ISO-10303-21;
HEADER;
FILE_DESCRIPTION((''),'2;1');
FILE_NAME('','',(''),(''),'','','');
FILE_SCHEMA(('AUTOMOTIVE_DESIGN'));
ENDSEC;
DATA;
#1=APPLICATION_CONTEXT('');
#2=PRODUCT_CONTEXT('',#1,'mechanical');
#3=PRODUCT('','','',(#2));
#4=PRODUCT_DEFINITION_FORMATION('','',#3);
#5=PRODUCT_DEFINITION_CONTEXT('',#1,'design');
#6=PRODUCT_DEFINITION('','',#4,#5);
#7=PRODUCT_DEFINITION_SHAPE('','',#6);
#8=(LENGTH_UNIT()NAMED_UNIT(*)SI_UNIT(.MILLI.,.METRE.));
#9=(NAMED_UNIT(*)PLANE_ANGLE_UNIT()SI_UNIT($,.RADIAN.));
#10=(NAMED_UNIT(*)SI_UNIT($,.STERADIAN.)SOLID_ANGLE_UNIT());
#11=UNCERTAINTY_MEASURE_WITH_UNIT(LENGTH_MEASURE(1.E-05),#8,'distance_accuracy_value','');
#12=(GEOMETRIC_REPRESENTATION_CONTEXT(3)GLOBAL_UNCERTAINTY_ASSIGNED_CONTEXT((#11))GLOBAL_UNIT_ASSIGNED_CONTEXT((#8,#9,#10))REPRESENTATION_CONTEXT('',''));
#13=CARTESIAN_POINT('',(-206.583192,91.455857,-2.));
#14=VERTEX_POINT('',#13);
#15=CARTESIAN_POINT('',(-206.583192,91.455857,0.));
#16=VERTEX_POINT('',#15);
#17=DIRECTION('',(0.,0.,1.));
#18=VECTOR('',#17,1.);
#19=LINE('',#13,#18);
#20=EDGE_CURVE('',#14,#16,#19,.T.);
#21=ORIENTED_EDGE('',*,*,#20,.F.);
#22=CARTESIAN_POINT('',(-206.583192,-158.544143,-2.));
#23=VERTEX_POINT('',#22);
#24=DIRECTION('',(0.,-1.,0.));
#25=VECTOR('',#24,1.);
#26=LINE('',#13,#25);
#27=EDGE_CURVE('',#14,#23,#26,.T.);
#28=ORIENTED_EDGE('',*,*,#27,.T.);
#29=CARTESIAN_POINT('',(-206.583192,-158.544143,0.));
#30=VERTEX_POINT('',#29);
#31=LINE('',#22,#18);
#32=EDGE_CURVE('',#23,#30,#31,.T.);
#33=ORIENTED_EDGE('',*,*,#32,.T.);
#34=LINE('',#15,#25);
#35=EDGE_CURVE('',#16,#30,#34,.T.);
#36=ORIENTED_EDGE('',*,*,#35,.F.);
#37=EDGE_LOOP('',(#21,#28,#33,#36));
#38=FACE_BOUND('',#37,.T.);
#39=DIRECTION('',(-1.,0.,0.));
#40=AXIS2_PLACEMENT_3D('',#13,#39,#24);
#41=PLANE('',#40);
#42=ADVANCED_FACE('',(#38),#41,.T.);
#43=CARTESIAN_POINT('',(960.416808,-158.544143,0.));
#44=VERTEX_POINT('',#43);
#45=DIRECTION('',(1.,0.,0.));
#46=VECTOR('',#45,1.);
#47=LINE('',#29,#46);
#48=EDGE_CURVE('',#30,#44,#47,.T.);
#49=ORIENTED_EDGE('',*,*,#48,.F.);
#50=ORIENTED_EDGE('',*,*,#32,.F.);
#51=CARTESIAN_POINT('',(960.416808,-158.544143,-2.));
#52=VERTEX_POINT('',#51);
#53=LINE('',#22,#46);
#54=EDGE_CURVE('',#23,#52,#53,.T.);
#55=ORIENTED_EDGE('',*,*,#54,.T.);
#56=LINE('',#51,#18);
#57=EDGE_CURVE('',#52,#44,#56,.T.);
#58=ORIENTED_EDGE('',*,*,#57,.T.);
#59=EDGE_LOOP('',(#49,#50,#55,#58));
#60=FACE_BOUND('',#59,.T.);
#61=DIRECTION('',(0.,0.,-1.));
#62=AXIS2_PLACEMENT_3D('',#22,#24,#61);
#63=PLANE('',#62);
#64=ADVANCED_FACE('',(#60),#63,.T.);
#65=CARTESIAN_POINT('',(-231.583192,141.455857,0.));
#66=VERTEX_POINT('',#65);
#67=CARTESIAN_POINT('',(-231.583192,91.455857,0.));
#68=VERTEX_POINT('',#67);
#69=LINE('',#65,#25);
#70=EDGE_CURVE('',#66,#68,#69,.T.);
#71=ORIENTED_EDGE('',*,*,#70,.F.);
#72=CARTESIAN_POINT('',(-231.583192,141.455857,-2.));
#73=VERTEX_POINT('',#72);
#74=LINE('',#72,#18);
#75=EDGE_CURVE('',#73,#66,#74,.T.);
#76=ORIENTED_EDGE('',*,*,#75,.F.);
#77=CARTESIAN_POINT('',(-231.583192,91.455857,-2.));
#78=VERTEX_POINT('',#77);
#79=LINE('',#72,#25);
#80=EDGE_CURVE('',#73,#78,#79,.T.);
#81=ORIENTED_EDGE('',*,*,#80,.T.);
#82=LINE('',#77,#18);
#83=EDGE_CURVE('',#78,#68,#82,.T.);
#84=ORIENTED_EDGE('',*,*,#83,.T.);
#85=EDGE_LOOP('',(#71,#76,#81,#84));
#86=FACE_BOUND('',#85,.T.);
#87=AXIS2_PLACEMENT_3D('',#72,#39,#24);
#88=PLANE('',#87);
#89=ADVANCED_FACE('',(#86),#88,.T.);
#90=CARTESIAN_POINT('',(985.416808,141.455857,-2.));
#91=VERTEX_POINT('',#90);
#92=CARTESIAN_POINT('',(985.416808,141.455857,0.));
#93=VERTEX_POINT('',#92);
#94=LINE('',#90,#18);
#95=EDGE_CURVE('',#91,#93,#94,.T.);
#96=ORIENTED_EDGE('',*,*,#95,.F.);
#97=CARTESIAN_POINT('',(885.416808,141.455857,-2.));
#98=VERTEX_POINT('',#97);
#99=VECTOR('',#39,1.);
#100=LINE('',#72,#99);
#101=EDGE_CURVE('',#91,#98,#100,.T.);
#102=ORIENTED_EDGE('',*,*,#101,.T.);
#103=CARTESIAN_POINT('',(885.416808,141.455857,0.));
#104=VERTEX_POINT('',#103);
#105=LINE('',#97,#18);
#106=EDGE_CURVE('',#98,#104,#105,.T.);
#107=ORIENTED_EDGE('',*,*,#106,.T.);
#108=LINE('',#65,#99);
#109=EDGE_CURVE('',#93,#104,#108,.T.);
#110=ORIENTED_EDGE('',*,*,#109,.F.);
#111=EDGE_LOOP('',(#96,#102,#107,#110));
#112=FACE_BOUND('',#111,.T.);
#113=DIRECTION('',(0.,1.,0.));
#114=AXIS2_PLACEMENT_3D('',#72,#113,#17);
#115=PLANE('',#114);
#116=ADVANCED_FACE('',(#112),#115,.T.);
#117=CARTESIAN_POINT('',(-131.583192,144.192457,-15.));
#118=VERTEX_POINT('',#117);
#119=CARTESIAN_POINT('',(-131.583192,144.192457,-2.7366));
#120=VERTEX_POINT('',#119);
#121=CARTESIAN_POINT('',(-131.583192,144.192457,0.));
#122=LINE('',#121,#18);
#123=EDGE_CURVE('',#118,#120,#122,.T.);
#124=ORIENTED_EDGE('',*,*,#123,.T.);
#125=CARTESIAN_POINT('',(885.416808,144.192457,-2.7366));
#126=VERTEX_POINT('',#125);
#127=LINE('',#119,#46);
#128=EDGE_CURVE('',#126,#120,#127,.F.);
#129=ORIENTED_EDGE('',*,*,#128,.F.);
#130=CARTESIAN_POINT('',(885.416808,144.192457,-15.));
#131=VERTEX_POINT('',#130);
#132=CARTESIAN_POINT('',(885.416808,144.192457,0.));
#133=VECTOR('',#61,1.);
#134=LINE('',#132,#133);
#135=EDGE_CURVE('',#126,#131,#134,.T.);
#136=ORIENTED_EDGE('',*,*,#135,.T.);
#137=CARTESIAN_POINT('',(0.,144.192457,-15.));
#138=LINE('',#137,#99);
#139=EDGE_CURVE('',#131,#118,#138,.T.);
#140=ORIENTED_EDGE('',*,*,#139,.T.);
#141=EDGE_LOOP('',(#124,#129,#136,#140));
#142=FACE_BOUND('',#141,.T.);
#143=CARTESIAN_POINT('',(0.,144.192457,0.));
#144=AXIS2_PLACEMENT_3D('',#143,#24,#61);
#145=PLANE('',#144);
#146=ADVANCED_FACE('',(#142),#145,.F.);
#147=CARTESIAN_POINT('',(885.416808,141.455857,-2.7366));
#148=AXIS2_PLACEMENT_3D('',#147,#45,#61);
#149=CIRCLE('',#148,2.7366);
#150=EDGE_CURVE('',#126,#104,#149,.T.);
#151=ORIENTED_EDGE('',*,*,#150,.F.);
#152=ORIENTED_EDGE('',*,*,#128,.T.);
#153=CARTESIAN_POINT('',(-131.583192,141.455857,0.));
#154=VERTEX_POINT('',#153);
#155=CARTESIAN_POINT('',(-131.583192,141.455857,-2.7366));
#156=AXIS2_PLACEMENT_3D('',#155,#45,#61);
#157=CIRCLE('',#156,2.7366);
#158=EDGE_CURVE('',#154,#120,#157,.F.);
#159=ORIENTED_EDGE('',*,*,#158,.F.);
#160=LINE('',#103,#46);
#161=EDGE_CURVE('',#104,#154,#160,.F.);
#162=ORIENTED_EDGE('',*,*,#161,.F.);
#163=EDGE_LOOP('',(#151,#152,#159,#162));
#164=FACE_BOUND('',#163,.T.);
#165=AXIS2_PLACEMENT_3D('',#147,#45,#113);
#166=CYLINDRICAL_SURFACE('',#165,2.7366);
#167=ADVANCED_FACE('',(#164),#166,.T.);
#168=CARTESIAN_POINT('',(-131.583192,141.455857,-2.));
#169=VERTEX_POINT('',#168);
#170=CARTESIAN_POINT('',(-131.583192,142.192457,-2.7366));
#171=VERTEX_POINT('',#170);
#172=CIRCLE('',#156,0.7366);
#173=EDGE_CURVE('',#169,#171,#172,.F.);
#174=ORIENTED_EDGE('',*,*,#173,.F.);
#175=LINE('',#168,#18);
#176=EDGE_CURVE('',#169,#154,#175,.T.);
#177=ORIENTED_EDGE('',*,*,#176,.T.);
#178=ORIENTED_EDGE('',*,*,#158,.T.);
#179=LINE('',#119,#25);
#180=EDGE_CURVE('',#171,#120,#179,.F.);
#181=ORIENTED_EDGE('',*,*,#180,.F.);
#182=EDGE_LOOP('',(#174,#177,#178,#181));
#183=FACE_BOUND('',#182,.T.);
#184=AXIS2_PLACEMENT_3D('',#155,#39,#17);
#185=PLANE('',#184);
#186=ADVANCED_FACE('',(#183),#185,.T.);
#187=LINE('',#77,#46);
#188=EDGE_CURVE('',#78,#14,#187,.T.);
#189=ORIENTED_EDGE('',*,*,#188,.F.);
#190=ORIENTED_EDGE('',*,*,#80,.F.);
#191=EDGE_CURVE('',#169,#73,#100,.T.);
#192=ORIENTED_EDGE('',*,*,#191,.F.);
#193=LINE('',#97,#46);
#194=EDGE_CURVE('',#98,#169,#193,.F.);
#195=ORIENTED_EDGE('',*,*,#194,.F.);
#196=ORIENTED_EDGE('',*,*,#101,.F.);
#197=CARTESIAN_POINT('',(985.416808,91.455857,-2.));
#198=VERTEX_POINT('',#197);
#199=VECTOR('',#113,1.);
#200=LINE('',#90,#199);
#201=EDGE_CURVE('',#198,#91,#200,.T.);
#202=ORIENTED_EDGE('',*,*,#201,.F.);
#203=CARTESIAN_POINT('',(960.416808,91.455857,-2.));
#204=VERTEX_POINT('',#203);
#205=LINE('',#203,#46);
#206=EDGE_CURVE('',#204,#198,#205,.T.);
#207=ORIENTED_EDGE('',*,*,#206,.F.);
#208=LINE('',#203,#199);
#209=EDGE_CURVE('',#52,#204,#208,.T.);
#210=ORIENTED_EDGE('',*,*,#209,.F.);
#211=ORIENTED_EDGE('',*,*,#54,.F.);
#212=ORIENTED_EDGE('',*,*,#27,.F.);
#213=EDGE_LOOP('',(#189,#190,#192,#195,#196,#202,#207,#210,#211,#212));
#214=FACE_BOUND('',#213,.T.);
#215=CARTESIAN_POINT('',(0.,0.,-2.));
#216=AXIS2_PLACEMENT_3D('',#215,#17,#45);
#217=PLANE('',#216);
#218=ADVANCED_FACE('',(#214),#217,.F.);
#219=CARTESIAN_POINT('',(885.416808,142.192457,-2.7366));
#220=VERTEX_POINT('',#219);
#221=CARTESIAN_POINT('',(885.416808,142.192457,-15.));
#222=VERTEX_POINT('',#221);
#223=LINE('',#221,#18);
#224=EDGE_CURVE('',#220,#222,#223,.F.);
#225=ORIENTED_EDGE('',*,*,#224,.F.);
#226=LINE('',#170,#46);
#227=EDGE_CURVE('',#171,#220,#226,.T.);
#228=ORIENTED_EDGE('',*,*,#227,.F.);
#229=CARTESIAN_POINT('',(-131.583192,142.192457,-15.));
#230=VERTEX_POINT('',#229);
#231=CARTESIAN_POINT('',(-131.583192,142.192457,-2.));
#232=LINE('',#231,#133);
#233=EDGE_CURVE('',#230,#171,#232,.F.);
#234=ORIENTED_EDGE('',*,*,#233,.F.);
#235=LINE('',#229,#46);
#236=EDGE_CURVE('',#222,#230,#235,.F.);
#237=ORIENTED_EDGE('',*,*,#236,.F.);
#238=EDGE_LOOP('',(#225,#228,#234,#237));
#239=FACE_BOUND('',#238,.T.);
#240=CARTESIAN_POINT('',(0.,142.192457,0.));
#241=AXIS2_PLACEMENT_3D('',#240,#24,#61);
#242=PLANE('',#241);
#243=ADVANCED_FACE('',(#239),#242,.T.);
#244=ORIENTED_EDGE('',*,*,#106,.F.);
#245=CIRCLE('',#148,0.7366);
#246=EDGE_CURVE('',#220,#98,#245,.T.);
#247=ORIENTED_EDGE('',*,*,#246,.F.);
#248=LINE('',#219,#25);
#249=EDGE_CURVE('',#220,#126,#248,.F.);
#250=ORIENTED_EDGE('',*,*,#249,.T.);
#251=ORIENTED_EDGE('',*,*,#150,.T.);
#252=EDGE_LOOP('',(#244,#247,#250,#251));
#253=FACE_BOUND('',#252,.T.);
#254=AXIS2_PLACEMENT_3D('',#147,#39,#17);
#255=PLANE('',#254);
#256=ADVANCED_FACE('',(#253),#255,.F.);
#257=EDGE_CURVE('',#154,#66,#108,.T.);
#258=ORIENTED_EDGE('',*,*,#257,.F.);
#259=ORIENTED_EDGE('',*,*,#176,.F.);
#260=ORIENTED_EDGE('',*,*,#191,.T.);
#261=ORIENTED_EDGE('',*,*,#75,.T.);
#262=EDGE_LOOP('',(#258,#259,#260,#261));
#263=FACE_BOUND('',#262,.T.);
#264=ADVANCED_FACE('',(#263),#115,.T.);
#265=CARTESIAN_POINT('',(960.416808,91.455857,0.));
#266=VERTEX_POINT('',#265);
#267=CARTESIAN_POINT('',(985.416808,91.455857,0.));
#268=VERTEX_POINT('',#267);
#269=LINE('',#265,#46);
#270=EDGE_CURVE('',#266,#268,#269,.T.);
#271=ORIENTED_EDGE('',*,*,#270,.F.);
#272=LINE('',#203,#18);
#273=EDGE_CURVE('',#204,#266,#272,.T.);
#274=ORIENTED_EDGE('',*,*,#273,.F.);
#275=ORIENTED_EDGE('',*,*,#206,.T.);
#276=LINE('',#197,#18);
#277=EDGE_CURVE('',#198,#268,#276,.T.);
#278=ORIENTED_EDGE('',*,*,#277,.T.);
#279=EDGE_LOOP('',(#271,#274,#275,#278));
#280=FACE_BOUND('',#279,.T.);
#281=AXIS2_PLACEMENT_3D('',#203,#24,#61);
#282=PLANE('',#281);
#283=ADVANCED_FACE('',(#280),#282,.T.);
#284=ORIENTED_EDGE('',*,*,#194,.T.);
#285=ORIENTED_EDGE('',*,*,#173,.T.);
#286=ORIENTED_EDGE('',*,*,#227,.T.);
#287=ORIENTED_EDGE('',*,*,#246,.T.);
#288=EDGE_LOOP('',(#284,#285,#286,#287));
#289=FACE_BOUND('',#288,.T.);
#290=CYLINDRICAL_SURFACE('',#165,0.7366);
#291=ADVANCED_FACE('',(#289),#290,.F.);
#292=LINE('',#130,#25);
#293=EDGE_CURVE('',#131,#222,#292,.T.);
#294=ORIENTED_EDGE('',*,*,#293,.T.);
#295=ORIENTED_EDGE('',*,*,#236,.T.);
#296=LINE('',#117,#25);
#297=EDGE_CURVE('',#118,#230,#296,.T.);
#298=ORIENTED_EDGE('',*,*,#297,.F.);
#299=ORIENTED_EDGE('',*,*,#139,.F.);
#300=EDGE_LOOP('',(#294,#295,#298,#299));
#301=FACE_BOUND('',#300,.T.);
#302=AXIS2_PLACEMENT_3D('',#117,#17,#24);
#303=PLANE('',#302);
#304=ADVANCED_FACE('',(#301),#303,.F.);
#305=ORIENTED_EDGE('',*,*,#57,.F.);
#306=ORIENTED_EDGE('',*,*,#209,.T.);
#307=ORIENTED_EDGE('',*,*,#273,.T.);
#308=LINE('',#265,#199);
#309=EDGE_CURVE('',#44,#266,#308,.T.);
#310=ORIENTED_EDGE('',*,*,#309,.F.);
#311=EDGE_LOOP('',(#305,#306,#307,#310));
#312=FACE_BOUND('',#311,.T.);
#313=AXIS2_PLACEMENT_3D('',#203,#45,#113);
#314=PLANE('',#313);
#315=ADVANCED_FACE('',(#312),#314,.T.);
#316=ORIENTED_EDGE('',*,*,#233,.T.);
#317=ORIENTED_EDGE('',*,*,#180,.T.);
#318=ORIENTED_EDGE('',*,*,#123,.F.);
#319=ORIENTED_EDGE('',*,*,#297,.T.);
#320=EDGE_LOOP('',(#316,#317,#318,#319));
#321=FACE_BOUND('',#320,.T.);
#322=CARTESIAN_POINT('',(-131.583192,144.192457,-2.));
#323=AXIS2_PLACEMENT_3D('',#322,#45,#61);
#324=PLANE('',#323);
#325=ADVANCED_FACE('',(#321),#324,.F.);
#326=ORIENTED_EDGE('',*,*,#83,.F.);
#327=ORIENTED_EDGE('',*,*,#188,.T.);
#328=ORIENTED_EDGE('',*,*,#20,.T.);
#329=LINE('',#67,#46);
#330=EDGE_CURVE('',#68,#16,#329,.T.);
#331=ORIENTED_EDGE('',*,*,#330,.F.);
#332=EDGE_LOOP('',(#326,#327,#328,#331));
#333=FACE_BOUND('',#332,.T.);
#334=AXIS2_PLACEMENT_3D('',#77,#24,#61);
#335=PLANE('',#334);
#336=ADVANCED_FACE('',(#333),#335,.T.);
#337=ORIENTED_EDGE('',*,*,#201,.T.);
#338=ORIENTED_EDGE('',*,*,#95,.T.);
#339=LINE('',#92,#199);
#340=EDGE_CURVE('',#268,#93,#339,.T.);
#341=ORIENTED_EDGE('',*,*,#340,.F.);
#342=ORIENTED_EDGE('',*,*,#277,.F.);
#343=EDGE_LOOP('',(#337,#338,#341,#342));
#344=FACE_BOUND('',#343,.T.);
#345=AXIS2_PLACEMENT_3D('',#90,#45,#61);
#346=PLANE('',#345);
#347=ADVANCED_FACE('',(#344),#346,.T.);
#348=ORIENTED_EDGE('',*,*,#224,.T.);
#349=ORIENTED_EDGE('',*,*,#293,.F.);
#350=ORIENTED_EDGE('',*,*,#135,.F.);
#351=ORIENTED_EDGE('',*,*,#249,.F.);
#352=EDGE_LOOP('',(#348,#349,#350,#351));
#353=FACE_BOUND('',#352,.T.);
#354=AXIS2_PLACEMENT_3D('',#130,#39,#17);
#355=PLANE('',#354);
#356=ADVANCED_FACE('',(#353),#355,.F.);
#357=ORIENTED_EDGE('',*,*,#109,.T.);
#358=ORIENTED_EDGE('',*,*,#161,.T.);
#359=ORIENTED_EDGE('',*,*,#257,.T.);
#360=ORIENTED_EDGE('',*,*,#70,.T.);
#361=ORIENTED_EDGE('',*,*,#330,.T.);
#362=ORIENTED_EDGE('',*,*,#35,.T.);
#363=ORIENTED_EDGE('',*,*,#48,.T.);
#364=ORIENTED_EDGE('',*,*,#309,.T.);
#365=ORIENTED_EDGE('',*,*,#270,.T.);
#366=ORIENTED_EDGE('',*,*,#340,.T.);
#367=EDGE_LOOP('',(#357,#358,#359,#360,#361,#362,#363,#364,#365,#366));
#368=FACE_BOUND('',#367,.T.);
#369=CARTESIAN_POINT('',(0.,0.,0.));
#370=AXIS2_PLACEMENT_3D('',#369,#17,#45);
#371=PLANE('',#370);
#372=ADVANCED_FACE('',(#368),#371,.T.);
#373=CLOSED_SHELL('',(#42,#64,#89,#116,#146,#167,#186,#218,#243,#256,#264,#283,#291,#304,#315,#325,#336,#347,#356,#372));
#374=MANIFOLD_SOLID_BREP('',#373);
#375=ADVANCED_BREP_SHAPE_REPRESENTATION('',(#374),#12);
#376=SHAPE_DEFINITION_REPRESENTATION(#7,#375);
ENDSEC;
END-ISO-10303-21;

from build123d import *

# Parameters (mm, degrees)
BASE_FLANGE1_DEPTH = 2
EDGE_FLANGE1_DEPTH = 1017


# Sheet-metal steps are written as plain solids
with BuildPart() as part:
    # Sketch1 → Base-Flange1 (new body)
    with BuildSketch(Plane.XY):
        Polygon((960.416808149, 91.455857385), (985.416808149, 91.455857385), (985.416808149, 141.455857385), (-231.583191851, 141.455857385), (-231.583191851, 91.455857385), (-206.583191851, 91.455857385), (-206.583191851, -158.544142615), (960.416808149, -158.544142615), align=None)
    extrude(amount=-BASE_FLANGE1_DEPTH)

    # Edge-Flange1 section (across the edge) → Edge-Flange1 (add)
    with BuildSketch(Plane(origin=(-131.583191851, 142.192457385, -2), x_dir=(0, -1, 0), z_dir=(1, 0, 0))):
        with BuildLine():
            Line((-2, 0.7366), (-2, 13))
            Line((-2, 13), (0, 13))
            Line((0, 13), (0, 0.7366))
            ThreePointArc((0, 0.7366), (0.215745145, 0.215745145), (0.7366, 0))
            Line((0.7366, 0), (0.7366, -2))
            ThreePointArc((0.7366, -2), (-1.198468417, -1.198468417), (-2, 0.7366))
        make_face()
    extrude(amount=EDGE_FLANGE1_DEPTH)


solid = part.part
